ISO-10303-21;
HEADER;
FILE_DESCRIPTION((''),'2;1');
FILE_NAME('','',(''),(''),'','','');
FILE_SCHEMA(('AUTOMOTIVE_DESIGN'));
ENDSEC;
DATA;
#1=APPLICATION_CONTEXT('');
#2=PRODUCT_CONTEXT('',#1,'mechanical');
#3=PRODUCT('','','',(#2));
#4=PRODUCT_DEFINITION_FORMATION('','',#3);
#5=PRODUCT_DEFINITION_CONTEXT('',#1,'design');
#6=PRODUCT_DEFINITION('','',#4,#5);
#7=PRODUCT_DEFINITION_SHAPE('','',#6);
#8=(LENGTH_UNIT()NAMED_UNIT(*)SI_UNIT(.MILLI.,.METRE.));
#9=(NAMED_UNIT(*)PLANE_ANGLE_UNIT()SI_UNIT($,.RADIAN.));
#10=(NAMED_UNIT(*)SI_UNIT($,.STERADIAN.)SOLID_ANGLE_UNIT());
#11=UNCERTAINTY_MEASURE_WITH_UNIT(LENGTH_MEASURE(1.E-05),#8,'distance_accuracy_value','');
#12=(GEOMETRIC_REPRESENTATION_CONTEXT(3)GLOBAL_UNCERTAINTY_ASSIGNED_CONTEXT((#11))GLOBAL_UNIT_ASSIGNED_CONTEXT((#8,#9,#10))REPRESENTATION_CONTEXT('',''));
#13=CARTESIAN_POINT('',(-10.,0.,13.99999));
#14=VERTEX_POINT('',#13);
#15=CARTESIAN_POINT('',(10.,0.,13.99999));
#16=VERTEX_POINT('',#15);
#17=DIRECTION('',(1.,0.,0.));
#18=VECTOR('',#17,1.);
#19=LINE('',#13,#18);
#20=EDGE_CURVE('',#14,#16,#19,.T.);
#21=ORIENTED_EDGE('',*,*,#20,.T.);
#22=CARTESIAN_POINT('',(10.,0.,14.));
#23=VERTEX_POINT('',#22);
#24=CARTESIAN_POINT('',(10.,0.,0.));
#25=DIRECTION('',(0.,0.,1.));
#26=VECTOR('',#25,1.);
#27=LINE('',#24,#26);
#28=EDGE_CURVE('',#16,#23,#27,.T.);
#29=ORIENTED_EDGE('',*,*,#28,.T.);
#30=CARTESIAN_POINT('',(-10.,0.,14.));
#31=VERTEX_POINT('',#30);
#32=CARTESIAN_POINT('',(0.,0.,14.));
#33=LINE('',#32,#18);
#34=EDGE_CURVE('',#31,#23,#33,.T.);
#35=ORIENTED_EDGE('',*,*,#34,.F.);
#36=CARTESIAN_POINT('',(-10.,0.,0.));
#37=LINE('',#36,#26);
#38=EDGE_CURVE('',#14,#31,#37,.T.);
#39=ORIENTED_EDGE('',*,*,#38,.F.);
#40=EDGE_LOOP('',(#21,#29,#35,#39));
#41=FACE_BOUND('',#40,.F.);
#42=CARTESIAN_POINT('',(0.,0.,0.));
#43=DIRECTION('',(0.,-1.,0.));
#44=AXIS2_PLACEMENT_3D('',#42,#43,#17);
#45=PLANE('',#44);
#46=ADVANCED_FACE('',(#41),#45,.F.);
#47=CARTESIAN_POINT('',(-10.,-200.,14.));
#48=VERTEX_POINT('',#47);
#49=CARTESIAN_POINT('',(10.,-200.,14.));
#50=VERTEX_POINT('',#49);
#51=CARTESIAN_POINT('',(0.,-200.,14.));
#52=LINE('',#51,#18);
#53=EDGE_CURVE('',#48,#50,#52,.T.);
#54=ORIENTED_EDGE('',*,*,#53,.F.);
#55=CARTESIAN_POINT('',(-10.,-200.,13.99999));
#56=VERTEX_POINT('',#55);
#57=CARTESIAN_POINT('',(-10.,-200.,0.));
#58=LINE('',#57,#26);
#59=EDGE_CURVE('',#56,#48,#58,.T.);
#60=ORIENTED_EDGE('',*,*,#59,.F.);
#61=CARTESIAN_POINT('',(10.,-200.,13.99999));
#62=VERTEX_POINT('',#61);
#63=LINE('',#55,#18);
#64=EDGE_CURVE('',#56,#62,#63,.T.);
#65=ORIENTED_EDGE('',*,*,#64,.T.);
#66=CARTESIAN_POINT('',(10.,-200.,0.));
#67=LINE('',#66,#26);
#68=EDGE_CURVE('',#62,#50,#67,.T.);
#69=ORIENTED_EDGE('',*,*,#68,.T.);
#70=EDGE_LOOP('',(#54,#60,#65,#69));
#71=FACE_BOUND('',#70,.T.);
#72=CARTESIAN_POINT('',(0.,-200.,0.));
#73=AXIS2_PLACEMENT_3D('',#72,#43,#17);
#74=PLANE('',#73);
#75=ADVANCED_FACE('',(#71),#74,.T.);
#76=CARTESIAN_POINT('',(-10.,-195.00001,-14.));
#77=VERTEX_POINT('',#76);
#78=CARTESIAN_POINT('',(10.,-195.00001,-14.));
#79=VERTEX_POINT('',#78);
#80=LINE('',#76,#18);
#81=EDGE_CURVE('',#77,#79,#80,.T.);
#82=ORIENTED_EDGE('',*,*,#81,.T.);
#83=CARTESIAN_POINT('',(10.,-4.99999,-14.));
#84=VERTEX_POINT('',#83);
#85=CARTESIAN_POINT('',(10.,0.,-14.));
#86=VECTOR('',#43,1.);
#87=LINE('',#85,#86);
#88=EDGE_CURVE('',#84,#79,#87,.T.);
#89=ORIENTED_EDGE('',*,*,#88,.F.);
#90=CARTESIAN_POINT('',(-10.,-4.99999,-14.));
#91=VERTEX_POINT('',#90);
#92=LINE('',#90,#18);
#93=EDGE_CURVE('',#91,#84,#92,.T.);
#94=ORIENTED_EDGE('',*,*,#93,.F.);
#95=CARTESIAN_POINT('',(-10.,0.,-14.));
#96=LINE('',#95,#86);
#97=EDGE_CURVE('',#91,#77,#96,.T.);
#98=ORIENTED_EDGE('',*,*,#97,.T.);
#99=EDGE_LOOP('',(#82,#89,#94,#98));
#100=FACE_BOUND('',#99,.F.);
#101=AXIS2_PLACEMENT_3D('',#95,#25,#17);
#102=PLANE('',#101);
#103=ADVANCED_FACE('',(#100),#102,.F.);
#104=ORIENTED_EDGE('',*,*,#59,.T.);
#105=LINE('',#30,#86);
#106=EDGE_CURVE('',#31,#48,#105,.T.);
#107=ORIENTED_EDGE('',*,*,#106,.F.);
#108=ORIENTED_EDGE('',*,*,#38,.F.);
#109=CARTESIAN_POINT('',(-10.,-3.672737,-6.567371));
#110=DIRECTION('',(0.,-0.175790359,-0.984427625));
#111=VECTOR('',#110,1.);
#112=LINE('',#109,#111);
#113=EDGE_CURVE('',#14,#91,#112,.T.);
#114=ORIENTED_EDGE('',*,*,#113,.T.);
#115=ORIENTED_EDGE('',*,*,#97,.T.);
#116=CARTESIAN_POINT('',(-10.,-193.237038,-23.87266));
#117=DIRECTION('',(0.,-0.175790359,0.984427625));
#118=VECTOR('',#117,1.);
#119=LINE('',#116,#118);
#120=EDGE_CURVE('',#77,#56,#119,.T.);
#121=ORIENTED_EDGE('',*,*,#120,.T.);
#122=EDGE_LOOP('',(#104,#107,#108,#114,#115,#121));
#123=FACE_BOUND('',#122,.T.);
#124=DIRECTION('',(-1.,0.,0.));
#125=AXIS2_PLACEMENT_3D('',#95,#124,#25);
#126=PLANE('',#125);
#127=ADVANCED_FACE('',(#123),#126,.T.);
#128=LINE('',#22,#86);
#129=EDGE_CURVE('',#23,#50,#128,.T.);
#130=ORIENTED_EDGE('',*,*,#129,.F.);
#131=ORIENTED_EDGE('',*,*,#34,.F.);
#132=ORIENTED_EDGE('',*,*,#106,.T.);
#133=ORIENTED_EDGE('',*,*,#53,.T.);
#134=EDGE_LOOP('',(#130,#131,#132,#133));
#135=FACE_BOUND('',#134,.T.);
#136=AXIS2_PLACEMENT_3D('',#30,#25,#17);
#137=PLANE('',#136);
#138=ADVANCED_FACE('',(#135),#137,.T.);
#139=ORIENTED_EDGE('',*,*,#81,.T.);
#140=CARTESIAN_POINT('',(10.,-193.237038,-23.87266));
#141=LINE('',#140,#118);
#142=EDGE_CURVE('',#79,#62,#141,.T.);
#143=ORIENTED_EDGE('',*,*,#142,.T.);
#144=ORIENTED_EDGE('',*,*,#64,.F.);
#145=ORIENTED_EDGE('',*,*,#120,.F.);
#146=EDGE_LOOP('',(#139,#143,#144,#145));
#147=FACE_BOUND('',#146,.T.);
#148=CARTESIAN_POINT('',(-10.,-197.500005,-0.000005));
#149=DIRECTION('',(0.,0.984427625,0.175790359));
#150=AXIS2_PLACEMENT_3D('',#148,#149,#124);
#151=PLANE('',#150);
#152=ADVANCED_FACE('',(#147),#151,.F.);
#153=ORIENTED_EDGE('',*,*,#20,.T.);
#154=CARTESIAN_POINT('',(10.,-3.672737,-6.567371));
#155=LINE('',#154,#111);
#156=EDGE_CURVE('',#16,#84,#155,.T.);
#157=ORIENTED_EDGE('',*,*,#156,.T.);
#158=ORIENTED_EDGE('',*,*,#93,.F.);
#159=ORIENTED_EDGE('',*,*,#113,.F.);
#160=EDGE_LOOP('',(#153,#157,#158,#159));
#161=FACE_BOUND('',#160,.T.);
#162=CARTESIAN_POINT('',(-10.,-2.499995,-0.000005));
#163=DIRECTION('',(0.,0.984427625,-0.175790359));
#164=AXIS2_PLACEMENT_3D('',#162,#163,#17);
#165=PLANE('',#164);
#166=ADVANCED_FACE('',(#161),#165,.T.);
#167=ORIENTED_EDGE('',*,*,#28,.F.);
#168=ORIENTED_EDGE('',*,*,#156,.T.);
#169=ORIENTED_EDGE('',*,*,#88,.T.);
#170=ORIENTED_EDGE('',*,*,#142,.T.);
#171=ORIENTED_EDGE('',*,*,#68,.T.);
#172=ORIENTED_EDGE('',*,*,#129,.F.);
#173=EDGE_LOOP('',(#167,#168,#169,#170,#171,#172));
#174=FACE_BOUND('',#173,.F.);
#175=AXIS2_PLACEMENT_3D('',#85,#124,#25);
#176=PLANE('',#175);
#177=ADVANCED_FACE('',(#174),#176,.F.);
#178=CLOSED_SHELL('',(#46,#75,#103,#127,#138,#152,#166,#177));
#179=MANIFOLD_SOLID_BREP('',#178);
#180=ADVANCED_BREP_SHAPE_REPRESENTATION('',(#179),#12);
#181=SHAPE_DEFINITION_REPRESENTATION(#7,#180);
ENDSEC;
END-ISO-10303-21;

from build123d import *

# Parameters (mm, degrees)
F0_W     = 20
F0_H     = 28
F1_DEPTH = 200
F2_SIZE2 = 27.99999
F2_SIZE  = 4.99999
F3_SIZE2 = 4.99999
F3_SIZE  = 27.99999


# Not quite as in the source:
# - a fillet or chamfer is up to 0.001 mm smaller than in the source, because OpenCascade refuses the exact size


with BuildPart() as f1:
    # F0 (on Front) → F1 (new body)
    with BuildSketch(Plane.XZ):
        Rectangle(F0_W, F0_H)
    extrude(amount=F1_DEPTH)

    # F2 (size 5 and 28 in the source; OpenCascade refuses exactly that, so slightly less here)
    f2_edges = [f1.edges().sort_by_distance(p)[0] for p in [
        (0, -200, -14),
    ]]
    f2_side = f1.faces().sort_by_distance((0, -100, -14))[0]
    chamfer(f2_edges, length=F2_SIZE, length2=F2_SIZE2, reference=f2_side)

    # F3 (size 28 and 5 in the source; OpenCascade refuses exactly that, so slightly less here)
    f3_edges = [f1.edges().sort_by_distance(p)[0] for p in [
        (0, 0, -14),
    ]]
    f3_side = f1.faces().sort_by_distance((0, 0, 0))[0]
    chamfer(f3_edges, length=F3_SIZE, length2=F3_SIZE2, reference=f3_side)


solid = f1.part
